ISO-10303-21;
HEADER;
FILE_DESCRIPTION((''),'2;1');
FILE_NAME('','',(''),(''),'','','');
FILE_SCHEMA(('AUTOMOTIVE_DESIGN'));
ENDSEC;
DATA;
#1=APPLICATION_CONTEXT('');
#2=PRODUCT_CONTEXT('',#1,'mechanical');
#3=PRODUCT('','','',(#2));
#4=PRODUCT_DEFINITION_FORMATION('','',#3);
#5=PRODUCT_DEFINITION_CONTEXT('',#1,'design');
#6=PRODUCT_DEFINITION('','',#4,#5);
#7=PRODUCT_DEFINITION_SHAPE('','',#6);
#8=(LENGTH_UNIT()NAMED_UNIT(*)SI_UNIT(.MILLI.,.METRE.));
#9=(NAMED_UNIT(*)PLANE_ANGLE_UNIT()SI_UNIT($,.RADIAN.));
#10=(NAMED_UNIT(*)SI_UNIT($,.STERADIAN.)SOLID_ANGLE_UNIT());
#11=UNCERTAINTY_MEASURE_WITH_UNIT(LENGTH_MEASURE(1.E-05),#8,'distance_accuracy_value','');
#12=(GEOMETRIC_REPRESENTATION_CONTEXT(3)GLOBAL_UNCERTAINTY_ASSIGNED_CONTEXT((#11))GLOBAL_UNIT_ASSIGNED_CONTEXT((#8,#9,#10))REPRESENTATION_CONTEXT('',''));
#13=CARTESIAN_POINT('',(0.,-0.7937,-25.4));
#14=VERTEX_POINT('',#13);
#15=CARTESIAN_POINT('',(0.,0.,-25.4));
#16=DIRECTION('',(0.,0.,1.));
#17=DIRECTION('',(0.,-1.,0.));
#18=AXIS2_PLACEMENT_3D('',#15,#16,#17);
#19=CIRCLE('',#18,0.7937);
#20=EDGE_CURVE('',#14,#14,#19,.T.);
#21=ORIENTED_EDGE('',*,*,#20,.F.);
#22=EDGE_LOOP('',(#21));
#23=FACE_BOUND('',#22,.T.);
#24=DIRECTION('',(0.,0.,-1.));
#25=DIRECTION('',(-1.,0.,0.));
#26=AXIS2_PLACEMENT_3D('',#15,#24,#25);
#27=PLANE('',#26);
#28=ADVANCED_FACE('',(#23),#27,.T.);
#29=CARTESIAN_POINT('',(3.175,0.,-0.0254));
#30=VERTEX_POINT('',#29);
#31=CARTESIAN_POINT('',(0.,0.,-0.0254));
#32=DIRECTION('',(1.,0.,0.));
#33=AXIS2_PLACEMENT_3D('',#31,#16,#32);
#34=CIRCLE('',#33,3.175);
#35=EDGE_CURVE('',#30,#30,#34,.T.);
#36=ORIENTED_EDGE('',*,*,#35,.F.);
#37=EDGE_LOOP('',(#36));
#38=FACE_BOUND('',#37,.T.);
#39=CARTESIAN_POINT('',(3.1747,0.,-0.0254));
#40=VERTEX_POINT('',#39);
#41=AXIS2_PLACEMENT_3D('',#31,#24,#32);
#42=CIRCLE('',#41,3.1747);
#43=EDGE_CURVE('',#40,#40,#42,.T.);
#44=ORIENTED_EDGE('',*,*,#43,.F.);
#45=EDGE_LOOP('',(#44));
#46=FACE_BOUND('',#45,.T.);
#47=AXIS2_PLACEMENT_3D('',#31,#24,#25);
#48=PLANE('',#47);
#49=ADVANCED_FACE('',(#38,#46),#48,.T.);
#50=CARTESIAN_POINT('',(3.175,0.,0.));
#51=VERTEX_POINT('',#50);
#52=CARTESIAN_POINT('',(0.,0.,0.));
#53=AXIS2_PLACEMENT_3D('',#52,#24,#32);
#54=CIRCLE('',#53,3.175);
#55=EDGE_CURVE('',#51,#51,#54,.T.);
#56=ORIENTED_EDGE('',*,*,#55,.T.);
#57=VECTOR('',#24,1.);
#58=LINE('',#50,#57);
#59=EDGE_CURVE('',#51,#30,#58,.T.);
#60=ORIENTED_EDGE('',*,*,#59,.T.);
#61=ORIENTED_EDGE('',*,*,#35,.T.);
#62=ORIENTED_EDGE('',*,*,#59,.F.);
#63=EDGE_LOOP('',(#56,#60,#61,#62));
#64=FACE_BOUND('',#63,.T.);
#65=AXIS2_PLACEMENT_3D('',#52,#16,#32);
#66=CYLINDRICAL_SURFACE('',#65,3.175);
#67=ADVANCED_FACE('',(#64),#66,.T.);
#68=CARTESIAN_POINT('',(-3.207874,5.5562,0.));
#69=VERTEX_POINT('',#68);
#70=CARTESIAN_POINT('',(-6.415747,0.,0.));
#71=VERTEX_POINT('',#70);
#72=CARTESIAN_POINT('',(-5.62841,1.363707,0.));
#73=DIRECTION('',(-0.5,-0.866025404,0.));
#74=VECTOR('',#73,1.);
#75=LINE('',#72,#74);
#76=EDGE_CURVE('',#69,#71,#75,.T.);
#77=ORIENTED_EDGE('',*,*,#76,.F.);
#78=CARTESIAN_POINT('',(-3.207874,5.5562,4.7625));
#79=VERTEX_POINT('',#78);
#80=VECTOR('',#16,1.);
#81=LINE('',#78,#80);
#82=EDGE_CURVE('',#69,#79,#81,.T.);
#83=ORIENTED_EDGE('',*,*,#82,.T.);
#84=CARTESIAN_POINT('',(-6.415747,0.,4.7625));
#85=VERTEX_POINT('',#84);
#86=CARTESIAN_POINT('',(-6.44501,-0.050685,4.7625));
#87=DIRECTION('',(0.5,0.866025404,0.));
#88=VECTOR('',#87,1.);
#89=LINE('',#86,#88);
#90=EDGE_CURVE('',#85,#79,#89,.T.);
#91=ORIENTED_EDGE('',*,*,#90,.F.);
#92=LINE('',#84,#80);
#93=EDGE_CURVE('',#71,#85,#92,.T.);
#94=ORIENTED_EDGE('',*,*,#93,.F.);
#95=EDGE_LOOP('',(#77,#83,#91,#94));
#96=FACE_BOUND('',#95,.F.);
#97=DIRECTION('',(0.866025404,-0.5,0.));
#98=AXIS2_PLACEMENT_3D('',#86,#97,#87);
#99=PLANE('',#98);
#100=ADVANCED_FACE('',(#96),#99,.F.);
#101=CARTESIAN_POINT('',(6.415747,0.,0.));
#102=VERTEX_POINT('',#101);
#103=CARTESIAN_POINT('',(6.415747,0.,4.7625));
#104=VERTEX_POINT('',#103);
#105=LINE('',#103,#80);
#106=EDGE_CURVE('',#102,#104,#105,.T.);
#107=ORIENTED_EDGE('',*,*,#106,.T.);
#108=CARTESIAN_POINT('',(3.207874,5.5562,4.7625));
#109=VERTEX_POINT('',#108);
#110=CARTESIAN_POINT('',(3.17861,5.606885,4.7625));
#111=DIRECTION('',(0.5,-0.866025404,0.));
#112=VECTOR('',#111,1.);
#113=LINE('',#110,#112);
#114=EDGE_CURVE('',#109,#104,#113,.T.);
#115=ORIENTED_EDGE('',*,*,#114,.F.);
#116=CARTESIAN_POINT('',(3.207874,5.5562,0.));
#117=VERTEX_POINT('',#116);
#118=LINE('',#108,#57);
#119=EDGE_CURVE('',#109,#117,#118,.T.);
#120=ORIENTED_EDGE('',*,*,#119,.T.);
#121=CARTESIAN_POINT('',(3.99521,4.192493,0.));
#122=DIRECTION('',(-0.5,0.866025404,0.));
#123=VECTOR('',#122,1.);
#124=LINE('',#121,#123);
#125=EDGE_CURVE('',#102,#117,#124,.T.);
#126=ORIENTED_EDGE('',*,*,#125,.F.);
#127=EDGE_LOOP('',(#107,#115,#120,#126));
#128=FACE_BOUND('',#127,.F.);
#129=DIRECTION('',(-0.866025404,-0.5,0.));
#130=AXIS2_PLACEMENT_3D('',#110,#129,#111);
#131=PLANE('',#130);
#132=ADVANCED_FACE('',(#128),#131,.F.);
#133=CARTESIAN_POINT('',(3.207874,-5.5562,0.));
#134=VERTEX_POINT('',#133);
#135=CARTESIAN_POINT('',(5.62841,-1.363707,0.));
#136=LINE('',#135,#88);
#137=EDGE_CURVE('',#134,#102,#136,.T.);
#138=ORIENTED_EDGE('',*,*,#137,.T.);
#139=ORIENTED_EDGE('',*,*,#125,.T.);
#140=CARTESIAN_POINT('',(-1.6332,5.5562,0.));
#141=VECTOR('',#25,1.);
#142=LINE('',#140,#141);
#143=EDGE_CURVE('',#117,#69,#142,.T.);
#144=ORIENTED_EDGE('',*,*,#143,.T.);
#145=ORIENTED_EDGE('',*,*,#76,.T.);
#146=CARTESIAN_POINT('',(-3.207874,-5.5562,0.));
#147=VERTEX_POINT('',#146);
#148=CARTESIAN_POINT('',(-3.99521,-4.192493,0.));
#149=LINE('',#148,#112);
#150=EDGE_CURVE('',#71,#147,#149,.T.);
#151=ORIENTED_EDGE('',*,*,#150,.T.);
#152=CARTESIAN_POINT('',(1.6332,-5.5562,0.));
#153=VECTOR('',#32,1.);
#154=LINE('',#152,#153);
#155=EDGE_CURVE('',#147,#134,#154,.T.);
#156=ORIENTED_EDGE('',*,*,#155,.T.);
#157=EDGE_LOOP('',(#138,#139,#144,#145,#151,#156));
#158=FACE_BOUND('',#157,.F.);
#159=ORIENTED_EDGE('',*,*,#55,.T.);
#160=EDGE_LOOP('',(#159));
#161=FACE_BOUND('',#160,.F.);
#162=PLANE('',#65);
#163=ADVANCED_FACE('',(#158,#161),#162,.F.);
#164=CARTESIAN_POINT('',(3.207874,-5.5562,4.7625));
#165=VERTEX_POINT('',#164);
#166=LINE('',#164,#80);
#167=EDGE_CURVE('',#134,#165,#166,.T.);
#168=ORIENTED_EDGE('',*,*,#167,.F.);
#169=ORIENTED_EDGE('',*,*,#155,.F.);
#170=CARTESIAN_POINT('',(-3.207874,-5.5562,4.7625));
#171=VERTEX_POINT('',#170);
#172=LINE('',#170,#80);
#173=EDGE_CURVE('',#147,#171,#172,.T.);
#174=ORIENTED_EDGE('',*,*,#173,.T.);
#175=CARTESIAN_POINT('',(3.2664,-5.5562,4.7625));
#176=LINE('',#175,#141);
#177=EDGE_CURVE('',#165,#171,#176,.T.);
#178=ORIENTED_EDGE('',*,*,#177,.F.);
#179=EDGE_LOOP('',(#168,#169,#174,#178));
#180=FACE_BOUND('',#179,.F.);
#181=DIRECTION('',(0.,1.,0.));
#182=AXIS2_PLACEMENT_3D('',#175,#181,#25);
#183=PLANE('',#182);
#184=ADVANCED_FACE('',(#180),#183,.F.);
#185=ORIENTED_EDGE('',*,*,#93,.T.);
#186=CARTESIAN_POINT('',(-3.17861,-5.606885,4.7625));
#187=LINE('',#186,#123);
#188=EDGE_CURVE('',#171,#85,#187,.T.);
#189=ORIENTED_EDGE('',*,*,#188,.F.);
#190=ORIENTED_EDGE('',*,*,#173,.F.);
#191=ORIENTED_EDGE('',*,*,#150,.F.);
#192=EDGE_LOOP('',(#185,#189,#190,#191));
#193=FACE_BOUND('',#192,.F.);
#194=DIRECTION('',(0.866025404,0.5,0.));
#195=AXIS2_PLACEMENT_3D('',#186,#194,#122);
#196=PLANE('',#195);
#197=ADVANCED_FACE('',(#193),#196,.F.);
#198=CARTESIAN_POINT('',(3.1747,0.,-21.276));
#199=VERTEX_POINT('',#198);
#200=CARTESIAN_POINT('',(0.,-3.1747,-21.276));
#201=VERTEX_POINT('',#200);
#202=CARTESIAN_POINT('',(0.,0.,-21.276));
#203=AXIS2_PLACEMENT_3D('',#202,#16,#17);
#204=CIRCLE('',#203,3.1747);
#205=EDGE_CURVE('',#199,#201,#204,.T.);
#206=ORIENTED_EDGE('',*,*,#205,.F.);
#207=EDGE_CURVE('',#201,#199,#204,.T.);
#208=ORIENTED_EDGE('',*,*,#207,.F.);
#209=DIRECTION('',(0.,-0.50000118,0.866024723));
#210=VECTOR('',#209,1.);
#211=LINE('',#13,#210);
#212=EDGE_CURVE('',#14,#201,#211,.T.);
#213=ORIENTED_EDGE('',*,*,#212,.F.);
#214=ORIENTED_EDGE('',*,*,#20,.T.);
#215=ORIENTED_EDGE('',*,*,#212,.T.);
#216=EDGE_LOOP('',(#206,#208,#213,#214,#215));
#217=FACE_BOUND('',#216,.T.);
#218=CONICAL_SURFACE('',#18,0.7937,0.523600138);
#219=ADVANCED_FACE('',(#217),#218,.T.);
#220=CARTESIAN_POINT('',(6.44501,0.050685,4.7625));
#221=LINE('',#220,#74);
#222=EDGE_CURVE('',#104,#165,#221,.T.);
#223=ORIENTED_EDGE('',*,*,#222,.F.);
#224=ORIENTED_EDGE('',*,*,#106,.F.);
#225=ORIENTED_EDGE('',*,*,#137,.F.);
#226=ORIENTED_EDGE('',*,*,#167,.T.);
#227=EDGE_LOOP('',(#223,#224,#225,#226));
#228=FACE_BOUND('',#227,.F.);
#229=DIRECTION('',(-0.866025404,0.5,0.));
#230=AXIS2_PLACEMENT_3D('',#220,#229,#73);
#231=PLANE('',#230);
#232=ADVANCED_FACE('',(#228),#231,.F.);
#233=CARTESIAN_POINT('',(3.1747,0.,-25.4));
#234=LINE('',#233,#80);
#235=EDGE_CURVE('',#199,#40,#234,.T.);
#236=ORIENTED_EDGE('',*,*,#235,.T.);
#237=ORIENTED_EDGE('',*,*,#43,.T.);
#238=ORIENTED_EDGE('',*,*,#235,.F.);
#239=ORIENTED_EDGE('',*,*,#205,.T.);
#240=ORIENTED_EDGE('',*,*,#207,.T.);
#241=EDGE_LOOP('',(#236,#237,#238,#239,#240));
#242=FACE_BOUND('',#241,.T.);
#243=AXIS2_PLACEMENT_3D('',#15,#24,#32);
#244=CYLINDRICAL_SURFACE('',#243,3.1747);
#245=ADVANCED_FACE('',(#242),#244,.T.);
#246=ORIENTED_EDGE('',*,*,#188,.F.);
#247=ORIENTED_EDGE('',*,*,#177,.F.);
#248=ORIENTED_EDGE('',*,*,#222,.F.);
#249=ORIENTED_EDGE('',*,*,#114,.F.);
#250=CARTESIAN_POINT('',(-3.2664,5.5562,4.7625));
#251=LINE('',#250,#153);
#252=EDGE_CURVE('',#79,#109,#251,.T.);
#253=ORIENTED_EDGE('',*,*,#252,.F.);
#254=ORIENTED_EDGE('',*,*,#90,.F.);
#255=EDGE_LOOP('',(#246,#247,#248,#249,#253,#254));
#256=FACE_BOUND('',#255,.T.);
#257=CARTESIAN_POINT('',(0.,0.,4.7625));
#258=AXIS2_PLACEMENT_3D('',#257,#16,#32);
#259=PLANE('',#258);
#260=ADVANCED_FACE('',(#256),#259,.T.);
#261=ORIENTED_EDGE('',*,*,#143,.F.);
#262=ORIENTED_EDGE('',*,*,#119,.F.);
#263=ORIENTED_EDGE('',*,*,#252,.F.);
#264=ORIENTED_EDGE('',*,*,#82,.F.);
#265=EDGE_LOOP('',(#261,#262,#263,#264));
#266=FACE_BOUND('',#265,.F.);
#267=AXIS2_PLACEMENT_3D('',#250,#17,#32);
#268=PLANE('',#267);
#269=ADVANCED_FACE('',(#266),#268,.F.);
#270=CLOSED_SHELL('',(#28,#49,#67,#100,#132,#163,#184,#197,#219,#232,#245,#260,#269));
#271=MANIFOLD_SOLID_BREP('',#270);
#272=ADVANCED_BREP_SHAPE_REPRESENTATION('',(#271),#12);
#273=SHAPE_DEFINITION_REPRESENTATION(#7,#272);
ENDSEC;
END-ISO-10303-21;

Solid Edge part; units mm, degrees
sketch "Sketch1" plane through (0, 0, 0) normal (0, 0, 1) x (1, 0, 0)
  circle A0 centre (0, 0) radius 6.4452
  dimension "D1" = 12.8905
extrude "Protrusion1" add sketch "Sketch1" along normal blind 4.7625
sketch "Sketch2" plane through (0, 0, 0) normal (0, 0, -1) x (1, 0, 0)
  circle A0 centre (0, 0) radius 3.175
extrude "Protrusion2" add sketch "Sketch2" along normal blind 25.4
sketch "Sketch3" plane through (0, 0, -25.4) normal (0, 0, -1) x (1, 0, 0)
  circle A0 centre (0, 0) radius 3.1747
extrude "Cutout1" cut sketch "Sketch3" against normal blind 25.3746 flip side to cut
sketch "Sketch4" plane through (0, 0, 4.7625) normal (0, 0, 1) x (1, 0, 0)
  line L0 (-3.2664, 5.5562) -> (3.2664, 5.5562)
  dimension "D1" = 11.1125
extrude "Cutout2" cut sketch "Sketch4" against normal up to next material side at (0, 5.6062, 4.7625)
sketch "Sketch5" plane through (0, 0, 0) normal (1, 0, 0) x (0, 1, 0)
  line L0 (-0.7937, -25.4) -> (-3.1747, -21.276)
  dimension "D1" = 0.7937
revolve "RevolvedCutout1" cut sketch "Sketch5" angle 360 about axis through (0, 0, -14.7796) along (0, 0, 1) material side at (0, -2.0275, -23.363)
pattern_circular "Pattern1" count 6 over 360 about axis through (0, 0, 4.7625) along (0, 0, 1) of "Cutout2"
properties part number "24100261"
